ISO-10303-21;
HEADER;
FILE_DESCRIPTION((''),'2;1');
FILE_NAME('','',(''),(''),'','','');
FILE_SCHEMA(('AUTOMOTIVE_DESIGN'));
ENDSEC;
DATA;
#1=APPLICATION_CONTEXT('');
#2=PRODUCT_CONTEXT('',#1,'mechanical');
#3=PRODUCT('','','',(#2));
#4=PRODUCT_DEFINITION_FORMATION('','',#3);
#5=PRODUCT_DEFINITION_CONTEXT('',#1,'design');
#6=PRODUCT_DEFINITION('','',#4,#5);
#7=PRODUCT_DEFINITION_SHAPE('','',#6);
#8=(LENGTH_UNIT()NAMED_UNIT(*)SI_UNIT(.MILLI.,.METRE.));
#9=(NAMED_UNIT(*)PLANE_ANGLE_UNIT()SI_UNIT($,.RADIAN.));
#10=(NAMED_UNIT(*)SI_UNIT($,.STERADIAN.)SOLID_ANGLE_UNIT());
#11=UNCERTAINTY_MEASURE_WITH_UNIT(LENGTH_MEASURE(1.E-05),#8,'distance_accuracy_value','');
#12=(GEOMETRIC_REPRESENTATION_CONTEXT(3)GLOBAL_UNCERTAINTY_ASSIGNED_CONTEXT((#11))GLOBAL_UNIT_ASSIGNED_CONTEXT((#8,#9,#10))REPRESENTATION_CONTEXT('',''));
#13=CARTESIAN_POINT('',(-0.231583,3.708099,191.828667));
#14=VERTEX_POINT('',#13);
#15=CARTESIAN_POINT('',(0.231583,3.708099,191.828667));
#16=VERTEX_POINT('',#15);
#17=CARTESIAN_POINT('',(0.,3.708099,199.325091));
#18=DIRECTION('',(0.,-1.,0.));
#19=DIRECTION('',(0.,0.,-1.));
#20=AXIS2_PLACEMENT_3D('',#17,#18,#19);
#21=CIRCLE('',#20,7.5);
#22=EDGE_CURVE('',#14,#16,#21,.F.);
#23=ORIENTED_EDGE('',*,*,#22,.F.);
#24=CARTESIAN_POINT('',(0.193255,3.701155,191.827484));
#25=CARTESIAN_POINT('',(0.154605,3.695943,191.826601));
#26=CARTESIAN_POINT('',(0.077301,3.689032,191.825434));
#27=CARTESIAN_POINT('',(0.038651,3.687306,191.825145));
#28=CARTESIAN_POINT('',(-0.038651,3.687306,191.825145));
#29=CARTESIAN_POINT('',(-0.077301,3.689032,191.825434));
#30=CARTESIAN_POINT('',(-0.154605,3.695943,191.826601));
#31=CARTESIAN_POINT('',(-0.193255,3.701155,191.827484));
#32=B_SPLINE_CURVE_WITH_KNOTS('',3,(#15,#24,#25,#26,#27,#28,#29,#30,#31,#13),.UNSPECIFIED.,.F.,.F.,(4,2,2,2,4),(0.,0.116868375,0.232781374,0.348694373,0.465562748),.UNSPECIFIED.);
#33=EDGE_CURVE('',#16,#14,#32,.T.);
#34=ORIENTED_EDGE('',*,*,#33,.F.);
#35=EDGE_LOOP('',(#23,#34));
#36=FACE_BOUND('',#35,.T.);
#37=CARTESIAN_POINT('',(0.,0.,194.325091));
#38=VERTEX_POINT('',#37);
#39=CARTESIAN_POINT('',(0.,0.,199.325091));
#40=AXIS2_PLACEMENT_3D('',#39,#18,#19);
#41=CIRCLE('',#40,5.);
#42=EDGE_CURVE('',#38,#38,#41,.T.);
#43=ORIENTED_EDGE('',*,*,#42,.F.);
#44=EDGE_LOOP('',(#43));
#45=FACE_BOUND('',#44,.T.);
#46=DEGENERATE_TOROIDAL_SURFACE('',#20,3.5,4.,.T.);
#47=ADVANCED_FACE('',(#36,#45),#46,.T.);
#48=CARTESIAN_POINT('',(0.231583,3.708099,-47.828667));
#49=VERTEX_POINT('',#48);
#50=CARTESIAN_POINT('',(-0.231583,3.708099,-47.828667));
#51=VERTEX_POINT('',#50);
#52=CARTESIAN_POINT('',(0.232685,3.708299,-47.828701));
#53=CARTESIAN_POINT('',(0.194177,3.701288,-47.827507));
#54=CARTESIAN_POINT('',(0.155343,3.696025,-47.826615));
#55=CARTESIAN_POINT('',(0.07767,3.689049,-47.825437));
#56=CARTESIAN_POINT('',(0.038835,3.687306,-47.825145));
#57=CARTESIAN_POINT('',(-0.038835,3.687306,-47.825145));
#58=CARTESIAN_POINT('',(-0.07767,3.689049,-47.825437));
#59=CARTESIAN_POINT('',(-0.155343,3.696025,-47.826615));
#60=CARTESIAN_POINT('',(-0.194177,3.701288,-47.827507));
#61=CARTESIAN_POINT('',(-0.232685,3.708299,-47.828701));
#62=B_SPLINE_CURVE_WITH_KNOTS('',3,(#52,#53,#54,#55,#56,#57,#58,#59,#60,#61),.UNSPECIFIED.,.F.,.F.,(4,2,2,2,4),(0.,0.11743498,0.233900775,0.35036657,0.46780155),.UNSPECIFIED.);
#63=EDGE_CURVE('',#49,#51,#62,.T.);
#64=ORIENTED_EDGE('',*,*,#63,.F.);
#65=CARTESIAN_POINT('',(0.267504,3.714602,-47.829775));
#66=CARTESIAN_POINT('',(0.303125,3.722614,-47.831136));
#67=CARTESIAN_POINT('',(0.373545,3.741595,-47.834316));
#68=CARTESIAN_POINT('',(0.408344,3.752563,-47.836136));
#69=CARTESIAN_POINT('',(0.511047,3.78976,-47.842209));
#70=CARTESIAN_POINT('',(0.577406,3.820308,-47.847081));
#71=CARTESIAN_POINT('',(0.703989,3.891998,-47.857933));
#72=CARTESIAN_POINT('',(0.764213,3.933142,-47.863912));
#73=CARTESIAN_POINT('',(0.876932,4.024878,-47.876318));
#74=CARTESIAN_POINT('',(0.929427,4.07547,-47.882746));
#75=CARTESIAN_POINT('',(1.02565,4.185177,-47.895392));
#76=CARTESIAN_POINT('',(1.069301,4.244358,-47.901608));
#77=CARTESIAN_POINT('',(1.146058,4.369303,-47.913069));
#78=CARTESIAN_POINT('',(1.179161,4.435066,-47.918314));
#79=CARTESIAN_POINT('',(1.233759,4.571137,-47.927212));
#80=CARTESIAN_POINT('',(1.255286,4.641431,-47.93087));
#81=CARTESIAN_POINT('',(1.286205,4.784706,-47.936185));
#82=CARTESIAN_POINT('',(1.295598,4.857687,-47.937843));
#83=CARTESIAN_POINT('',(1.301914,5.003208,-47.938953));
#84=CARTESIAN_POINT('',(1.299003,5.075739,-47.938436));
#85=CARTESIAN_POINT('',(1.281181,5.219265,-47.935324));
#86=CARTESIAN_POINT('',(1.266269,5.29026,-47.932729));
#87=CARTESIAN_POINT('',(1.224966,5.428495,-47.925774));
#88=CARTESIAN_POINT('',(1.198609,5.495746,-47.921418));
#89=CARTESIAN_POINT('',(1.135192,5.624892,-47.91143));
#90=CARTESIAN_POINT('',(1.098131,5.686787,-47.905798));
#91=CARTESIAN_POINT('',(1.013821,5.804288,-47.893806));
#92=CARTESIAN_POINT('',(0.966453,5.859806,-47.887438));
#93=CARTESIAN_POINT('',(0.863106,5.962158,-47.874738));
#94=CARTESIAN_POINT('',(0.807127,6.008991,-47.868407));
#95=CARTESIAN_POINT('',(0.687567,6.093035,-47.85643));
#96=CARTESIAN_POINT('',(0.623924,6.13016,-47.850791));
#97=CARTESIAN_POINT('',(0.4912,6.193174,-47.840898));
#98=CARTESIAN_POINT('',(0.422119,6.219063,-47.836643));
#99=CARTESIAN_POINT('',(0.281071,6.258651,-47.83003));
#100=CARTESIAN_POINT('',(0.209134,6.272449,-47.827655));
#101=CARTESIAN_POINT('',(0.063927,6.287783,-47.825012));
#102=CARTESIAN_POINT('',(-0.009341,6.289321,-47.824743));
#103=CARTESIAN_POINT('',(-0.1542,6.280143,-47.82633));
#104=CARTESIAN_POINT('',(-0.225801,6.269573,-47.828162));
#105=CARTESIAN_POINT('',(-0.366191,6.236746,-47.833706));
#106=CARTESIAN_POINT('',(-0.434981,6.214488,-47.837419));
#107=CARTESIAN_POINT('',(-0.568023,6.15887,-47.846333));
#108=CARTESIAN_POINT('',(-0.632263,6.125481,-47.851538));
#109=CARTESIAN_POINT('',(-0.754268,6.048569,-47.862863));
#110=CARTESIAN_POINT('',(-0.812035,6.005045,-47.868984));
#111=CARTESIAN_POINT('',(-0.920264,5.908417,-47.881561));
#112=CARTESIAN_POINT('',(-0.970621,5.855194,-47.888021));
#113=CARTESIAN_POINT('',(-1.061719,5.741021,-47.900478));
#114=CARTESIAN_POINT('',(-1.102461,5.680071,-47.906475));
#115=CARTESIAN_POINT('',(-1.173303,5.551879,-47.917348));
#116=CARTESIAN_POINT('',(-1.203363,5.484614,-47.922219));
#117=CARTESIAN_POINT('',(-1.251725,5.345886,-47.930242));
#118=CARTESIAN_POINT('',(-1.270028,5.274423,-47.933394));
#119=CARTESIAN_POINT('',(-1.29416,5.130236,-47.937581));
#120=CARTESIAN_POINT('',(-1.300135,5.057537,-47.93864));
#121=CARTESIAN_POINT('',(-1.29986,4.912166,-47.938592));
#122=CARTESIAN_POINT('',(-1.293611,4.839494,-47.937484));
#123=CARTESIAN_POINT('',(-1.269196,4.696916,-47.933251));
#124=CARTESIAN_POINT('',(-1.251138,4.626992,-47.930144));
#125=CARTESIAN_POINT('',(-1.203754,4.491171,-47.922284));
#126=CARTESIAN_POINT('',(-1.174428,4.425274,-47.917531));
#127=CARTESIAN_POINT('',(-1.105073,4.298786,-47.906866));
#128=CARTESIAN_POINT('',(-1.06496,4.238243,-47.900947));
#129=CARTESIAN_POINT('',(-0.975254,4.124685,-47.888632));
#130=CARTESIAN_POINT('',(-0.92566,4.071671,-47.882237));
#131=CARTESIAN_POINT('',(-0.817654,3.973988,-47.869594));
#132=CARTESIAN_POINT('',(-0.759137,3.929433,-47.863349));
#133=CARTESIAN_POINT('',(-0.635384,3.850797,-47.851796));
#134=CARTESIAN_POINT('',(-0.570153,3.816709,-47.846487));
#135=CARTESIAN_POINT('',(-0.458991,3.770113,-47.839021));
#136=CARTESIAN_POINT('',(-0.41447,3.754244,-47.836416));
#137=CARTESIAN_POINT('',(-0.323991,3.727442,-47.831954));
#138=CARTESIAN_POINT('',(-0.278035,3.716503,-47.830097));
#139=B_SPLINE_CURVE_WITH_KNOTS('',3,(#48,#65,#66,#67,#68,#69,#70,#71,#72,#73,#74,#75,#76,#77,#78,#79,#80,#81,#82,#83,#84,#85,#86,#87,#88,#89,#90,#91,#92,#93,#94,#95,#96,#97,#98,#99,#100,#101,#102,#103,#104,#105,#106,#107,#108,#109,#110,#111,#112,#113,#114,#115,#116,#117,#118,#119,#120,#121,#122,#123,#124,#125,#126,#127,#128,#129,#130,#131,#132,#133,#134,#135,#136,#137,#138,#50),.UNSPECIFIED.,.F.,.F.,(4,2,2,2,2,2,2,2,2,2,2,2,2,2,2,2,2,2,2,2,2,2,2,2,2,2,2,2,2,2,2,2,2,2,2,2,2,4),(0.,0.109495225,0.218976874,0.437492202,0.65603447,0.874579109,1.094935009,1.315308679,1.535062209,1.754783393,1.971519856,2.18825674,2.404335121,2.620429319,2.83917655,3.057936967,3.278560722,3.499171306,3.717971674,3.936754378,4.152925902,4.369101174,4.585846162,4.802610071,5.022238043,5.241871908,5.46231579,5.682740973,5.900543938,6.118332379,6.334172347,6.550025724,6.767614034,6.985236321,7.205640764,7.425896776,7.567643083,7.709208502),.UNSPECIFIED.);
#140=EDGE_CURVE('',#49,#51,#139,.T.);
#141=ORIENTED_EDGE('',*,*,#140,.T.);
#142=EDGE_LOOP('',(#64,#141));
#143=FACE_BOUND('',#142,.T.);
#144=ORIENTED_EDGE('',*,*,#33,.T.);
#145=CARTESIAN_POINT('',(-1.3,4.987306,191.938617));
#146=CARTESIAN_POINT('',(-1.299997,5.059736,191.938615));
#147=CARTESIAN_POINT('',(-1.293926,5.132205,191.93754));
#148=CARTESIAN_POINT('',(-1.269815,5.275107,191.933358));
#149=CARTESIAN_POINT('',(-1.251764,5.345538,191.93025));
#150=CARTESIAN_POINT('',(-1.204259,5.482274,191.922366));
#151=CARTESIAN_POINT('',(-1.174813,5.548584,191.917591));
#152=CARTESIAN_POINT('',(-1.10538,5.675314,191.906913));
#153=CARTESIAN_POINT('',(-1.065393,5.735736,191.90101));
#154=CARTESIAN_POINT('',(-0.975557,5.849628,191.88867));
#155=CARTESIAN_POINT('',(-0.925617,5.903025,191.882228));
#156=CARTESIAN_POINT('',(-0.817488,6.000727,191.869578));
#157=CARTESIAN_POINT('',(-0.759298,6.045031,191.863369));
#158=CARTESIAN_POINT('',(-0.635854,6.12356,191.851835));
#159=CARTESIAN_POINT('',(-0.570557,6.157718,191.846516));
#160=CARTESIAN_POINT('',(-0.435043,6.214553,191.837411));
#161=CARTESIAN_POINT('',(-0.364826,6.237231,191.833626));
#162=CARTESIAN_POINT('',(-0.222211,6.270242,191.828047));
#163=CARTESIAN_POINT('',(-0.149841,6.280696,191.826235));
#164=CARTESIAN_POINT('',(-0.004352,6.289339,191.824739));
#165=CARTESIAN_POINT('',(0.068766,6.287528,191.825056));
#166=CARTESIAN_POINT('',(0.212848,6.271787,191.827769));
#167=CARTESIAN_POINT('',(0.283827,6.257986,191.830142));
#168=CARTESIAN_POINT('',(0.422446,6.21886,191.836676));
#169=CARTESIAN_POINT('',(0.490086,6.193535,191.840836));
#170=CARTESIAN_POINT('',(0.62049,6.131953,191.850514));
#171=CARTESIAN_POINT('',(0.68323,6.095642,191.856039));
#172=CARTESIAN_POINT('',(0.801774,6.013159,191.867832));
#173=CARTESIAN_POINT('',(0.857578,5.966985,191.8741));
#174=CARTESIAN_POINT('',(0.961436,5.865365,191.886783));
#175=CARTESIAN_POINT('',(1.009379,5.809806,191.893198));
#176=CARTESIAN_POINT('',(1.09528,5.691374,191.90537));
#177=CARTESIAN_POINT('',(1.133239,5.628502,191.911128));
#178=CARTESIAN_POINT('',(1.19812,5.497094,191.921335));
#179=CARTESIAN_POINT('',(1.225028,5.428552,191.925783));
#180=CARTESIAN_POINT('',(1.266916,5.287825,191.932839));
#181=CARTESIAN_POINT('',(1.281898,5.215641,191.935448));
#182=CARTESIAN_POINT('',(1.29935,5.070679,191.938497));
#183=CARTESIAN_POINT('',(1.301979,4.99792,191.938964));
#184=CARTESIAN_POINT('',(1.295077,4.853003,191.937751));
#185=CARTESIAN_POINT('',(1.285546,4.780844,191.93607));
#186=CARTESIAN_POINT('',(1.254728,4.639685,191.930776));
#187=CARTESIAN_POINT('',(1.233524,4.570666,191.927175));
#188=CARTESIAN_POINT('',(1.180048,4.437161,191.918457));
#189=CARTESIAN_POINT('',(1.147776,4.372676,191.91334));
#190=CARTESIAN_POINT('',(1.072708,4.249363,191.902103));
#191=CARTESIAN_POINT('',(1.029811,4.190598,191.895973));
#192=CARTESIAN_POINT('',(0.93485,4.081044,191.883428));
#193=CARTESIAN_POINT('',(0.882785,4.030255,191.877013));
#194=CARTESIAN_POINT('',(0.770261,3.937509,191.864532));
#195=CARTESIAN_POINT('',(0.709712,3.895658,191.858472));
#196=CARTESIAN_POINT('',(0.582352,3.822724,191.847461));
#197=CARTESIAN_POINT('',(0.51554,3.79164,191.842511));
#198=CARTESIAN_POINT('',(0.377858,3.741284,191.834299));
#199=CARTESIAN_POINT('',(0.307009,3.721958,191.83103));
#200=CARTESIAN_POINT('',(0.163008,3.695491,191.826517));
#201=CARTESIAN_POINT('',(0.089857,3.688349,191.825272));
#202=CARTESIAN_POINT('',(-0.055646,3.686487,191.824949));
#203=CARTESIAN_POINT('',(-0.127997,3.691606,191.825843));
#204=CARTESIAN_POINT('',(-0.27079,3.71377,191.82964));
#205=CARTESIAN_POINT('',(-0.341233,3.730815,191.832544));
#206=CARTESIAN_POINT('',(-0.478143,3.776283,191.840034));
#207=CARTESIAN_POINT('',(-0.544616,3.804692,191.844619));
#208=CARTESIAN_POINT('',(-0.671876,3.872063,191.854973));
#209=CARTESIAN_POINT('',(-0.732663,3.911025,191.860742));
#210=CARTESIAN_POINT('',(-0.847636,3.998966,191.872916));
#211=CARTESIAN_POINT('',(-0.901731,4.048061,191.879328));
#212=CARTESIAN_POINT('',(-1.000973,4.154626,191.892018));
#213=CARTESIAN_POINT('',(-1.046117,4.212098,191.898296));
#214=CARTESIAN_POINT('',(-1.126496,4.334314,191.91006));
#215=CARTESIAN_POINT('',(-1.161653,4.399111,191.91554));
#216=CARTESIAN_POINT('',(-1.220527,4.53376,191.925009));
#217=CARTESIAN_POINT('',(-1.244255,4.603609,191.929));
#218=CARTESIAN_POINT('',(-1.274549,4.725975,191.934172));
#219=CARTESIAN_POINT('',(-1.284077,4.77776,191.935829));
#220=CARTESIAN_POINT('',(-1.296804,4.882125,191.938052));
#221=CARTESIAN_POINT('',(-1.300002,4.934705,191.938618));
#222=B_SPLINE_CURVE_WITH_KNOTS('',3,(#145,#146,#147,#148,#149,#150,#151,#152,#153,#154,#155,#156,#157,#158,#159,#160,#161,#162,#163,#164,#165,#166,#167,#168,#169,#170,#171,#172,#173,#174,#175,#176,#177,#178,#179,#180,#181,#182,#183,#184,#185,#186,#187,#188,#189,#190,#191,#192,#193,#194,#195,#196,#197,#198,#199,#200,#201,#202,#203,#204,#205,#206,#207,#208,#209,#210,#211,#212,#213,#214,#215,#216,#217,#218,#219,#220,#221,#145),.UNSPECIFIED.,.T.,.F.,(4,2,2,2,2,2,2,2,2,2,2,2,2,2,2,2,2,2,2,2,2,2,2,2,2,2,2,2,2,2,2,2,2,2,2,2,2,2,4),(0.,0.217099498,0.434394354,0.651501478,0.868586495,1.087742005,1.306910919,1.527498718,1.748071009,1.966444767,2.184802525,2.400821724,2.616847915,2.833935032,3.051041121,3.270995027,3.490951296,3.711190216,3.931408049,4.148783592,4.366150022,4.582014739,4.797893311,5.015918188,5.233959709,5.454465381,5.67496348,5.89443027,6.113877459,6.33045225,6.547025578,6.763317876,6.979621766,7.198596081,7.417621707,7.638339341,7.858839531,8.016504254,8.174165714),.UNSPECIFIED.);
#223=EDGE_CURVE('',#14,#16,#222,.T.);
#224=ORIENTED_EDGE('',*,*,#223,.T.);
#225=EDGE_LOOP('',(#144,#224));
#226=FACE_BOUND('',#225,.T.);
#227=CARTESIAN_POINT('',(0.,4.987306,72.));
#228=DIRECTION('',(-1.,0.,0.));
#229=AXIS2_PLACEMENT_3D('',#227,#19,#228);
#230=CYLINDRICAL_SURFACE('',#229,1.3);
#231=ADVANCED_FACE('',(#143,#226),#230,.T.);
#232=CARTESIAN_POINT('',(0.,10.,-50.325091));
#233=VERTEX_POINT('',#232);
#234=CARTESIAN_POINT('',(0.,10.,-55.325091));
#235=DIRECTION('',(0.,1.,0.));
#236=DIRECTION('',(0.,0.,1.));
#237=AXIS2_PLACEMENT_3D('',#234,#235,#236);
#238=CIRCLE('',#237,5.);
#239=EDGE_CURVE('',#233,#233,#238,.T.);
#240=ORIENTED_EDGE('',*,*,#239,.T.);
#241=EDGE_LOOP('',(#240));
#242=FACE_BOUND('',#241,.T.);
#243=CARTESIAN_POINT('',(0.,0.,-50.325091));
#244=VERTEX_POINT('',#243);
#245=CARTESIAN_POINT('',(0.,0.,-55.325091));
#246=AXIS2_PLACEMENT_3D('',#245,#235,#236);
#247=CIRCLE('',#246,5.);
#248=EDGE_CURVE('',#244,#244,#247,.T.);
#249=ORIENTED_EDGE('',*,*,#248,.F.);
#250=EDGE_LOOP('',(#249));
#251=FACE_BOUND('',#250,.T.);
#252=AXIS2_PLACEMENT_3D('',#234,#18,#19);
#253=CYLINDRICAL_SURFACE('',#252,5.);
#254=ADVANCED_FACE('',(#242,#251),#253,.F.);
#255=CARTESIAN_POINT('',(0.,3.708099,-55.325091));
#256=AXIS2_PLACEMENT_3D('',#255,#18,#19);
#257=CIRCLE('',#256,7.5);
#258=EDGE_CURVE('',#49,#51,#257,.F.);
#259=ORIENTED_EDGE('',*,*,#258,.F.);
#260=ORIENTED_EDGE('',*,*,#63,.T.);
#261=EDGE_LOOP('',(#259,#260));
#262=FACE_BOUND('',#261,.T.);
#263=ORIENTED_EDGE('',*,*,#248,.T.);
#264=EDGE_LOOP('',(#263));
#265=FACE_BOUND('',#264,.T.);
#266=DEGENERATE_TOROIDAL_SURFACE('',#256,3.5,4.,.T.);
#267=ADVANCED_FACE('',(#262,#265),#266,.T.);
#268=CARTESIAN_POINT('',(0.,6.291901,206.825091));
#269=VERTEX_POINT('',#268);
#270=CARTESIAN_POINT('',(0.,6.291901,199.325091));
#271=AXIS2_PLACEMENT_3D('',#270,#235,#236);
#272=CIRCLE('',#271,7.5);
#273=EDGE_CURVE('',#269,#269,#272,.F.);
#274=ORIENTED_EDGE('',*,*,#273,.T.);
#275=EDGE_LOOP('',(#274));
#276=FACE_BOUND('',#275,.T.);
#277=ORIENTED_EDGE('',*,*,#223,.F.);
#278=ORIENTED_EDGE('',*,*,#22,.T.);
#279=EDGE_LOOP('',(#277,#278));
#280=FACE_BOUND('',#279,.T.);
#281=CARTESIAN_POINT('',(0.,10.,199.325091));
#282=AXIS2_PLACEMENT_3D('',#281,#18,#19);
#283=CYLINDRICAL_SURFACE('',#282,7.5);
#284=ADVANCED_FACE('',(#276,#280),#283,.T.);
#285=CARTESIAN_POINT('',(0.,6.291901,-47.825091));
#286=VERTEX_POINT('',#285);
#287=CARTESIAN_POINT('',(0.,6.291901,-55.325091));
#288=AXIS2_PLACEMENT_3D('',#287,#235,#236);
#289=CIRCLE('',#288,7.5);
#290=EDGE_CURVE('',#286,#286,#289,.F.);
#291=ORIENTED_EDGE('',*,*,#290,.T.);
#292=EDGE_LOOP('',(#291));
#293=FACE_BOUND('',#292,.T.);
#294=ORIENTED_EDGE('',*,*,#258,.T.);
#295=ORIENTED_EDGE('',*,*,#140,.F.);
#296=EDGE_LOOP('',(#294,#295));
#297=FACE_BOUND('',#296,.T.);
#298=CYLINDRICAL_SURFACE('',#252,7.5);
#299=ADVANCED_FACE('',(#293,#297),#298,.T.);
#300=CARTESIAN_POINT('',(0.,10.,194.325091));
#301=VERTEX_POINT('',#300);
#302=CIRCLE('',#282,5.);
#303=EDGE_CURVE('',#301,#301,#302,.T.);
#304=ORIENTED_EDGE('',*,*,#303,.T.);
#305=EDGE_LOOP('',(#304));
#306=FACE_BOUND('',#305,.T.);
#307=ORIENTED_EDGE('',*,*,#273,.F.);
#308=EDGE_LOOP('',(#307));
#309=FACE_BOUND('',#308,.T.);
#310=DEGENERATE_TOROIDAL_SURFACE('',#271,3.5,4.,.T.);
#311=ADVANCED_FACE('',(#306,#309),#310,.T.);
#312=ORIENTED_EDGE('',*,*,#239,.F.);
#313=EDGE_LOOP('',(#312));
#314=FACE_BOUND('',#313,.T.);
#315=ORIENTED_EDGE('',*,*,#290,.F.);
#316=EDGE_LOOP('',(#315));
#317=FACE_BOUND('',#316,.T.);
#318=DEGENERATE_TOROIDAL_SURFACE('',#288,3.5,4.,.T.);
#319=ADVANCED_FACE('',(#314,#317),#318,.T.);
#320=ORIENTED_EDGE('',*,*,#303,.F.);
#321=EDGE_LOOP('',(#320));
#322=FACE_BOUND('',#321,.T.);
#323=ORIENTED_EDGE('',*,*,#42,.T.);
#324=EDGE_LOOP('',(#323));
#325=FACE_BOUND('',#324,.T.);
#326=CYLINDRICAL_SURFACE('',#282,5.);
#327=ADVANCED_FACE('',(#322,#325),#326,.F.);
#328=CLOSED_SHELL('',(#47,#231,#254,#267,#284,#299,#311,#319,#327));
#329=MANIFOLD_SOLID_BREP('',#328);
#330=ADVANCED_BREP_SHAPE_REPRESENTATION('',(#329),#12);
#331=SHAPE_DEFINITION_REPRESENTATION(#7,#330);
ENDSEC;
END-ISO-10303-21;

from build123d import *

# Parameters (mm, degrees)
SKETCH_1_R      = 7.5
SKETCH_1_R_2    = 5
EXTRUDE_1_DEPTH = 10
FILLET_1_R      = 4
SKETCH_4_R      = 1.3
EXTRUDE_3_DEPTH = 120


with BuildPart() as part:
    # 草图1 → 凸台-拉伸1 (new body)
    with BuildSketch(Plane(origin=(0, 0, 0), x_dir=(1, 0, 0), z_dir=(0, 1, 0))):
        with Locations(Location((0, 55.325090671, 0), (0, 0, 270))):
            Circle(SKETCH_1_R)
        with Locations(Location((0, 55.325090671, 0), (0, 0, 270))):
            Circle(SKETCH_1_R_2, mode=Mode.SUBTRACT)
    extrude(amount=EXTRUDE_1_DEPTH)

    # 圆角1
    # the kernel refuses this fillet: 4 mm, written as the material it takes off along each edge
    with BuildSketch(Plane(origin=(0, 0, -55.325090671), x_dir=(0, 0, 1), z_dir=(-1, 0, 0))) as fillet_1_piece_1:
        with BuildLine():
            CenterArc((3.5, 3.708099244), FILLET_1_R, 292.024312837, 67.975687163)
            Line((5, 0), (5.03, -0.074161985))
            ThreePointArc((5.03, -0.074161985), (6.25, -0.08), (7.5, -0.08))
            Line((7.5, -0.08), (7.58, 0))
            Line((7.58, 0), (7.58, 3.708099244))
            Line((7.58, 3.708099244), (7.5, 3.708099244))
        make_face()
    revolve(axis=Axis((0, 0, -55.325090671), (0, 1, 0)), mode=Mode.SUBTRACT)
    with BuildSketch(Plane(origin=(0, 10, -55.325090671), x_dir=(0, 0, 1), z_dir=(-1, 0, 0))) as fillet_1_piece_2:
        with BuildLine():
            CenterArc((3.5, -3.708099244), FILLET_1_R, 0, 67.975687163)
            Line((5, 0), (5.03, 0.074161985))
            ThreePointArc((5.03, 0.074161985), (6.25, 0.08), (7.5, 0.08))
            Line((7.5, 0.08), (7.58, 0))
            Line((7.58, 0), (7.58, -3.708099244))
            Line((7.58, -3.708099244), (7.5, -3.708099244))
        make_face()
    revolve(axis=Axis((0, 10, -55.325090671), (0, 1, 0)), mode=Mode.SUBTRACT)

    # 草图4 → 凸台-拉伸3 (add)
    with BuildSketch(Plane.XY.offset(-48)):
        with Locations(Location((0, 4.987305738, 0), (0, 0, 259.738510759))):
            Circle(SKETCH_4_R)
    extrude_3 = extrude(amount=EXTRUDE_3_DEPTH)

    # 镜向6: 凸台-拉伸3 across plane
    add(extrude_3.mirror(Plane.XY.offset(72)))

    # 镜向7: read off the stored shape, not the designer's step
    # 镜向7 outline → 镜向7 (revolve)
    with BuildSketch(Plane.XY.offset(199.325090671)):
        with BuildLine():
            Line((7.5, 3.708099244), (7.5, 6.291900756))
            ThreePointArc((7.5, 6.291900756), (6.81662479, 8.527968734), (5, 10))
            Line((5, 10), (5, 0))
            ThreePointArc((5, 0), (6.81662479, 1.472031266), (7.5, 3.708099244))
        make_face()
    revolve(axis=Axis((0, 0, 199.325090671), (0, 1, 0)))


solid = part.part
